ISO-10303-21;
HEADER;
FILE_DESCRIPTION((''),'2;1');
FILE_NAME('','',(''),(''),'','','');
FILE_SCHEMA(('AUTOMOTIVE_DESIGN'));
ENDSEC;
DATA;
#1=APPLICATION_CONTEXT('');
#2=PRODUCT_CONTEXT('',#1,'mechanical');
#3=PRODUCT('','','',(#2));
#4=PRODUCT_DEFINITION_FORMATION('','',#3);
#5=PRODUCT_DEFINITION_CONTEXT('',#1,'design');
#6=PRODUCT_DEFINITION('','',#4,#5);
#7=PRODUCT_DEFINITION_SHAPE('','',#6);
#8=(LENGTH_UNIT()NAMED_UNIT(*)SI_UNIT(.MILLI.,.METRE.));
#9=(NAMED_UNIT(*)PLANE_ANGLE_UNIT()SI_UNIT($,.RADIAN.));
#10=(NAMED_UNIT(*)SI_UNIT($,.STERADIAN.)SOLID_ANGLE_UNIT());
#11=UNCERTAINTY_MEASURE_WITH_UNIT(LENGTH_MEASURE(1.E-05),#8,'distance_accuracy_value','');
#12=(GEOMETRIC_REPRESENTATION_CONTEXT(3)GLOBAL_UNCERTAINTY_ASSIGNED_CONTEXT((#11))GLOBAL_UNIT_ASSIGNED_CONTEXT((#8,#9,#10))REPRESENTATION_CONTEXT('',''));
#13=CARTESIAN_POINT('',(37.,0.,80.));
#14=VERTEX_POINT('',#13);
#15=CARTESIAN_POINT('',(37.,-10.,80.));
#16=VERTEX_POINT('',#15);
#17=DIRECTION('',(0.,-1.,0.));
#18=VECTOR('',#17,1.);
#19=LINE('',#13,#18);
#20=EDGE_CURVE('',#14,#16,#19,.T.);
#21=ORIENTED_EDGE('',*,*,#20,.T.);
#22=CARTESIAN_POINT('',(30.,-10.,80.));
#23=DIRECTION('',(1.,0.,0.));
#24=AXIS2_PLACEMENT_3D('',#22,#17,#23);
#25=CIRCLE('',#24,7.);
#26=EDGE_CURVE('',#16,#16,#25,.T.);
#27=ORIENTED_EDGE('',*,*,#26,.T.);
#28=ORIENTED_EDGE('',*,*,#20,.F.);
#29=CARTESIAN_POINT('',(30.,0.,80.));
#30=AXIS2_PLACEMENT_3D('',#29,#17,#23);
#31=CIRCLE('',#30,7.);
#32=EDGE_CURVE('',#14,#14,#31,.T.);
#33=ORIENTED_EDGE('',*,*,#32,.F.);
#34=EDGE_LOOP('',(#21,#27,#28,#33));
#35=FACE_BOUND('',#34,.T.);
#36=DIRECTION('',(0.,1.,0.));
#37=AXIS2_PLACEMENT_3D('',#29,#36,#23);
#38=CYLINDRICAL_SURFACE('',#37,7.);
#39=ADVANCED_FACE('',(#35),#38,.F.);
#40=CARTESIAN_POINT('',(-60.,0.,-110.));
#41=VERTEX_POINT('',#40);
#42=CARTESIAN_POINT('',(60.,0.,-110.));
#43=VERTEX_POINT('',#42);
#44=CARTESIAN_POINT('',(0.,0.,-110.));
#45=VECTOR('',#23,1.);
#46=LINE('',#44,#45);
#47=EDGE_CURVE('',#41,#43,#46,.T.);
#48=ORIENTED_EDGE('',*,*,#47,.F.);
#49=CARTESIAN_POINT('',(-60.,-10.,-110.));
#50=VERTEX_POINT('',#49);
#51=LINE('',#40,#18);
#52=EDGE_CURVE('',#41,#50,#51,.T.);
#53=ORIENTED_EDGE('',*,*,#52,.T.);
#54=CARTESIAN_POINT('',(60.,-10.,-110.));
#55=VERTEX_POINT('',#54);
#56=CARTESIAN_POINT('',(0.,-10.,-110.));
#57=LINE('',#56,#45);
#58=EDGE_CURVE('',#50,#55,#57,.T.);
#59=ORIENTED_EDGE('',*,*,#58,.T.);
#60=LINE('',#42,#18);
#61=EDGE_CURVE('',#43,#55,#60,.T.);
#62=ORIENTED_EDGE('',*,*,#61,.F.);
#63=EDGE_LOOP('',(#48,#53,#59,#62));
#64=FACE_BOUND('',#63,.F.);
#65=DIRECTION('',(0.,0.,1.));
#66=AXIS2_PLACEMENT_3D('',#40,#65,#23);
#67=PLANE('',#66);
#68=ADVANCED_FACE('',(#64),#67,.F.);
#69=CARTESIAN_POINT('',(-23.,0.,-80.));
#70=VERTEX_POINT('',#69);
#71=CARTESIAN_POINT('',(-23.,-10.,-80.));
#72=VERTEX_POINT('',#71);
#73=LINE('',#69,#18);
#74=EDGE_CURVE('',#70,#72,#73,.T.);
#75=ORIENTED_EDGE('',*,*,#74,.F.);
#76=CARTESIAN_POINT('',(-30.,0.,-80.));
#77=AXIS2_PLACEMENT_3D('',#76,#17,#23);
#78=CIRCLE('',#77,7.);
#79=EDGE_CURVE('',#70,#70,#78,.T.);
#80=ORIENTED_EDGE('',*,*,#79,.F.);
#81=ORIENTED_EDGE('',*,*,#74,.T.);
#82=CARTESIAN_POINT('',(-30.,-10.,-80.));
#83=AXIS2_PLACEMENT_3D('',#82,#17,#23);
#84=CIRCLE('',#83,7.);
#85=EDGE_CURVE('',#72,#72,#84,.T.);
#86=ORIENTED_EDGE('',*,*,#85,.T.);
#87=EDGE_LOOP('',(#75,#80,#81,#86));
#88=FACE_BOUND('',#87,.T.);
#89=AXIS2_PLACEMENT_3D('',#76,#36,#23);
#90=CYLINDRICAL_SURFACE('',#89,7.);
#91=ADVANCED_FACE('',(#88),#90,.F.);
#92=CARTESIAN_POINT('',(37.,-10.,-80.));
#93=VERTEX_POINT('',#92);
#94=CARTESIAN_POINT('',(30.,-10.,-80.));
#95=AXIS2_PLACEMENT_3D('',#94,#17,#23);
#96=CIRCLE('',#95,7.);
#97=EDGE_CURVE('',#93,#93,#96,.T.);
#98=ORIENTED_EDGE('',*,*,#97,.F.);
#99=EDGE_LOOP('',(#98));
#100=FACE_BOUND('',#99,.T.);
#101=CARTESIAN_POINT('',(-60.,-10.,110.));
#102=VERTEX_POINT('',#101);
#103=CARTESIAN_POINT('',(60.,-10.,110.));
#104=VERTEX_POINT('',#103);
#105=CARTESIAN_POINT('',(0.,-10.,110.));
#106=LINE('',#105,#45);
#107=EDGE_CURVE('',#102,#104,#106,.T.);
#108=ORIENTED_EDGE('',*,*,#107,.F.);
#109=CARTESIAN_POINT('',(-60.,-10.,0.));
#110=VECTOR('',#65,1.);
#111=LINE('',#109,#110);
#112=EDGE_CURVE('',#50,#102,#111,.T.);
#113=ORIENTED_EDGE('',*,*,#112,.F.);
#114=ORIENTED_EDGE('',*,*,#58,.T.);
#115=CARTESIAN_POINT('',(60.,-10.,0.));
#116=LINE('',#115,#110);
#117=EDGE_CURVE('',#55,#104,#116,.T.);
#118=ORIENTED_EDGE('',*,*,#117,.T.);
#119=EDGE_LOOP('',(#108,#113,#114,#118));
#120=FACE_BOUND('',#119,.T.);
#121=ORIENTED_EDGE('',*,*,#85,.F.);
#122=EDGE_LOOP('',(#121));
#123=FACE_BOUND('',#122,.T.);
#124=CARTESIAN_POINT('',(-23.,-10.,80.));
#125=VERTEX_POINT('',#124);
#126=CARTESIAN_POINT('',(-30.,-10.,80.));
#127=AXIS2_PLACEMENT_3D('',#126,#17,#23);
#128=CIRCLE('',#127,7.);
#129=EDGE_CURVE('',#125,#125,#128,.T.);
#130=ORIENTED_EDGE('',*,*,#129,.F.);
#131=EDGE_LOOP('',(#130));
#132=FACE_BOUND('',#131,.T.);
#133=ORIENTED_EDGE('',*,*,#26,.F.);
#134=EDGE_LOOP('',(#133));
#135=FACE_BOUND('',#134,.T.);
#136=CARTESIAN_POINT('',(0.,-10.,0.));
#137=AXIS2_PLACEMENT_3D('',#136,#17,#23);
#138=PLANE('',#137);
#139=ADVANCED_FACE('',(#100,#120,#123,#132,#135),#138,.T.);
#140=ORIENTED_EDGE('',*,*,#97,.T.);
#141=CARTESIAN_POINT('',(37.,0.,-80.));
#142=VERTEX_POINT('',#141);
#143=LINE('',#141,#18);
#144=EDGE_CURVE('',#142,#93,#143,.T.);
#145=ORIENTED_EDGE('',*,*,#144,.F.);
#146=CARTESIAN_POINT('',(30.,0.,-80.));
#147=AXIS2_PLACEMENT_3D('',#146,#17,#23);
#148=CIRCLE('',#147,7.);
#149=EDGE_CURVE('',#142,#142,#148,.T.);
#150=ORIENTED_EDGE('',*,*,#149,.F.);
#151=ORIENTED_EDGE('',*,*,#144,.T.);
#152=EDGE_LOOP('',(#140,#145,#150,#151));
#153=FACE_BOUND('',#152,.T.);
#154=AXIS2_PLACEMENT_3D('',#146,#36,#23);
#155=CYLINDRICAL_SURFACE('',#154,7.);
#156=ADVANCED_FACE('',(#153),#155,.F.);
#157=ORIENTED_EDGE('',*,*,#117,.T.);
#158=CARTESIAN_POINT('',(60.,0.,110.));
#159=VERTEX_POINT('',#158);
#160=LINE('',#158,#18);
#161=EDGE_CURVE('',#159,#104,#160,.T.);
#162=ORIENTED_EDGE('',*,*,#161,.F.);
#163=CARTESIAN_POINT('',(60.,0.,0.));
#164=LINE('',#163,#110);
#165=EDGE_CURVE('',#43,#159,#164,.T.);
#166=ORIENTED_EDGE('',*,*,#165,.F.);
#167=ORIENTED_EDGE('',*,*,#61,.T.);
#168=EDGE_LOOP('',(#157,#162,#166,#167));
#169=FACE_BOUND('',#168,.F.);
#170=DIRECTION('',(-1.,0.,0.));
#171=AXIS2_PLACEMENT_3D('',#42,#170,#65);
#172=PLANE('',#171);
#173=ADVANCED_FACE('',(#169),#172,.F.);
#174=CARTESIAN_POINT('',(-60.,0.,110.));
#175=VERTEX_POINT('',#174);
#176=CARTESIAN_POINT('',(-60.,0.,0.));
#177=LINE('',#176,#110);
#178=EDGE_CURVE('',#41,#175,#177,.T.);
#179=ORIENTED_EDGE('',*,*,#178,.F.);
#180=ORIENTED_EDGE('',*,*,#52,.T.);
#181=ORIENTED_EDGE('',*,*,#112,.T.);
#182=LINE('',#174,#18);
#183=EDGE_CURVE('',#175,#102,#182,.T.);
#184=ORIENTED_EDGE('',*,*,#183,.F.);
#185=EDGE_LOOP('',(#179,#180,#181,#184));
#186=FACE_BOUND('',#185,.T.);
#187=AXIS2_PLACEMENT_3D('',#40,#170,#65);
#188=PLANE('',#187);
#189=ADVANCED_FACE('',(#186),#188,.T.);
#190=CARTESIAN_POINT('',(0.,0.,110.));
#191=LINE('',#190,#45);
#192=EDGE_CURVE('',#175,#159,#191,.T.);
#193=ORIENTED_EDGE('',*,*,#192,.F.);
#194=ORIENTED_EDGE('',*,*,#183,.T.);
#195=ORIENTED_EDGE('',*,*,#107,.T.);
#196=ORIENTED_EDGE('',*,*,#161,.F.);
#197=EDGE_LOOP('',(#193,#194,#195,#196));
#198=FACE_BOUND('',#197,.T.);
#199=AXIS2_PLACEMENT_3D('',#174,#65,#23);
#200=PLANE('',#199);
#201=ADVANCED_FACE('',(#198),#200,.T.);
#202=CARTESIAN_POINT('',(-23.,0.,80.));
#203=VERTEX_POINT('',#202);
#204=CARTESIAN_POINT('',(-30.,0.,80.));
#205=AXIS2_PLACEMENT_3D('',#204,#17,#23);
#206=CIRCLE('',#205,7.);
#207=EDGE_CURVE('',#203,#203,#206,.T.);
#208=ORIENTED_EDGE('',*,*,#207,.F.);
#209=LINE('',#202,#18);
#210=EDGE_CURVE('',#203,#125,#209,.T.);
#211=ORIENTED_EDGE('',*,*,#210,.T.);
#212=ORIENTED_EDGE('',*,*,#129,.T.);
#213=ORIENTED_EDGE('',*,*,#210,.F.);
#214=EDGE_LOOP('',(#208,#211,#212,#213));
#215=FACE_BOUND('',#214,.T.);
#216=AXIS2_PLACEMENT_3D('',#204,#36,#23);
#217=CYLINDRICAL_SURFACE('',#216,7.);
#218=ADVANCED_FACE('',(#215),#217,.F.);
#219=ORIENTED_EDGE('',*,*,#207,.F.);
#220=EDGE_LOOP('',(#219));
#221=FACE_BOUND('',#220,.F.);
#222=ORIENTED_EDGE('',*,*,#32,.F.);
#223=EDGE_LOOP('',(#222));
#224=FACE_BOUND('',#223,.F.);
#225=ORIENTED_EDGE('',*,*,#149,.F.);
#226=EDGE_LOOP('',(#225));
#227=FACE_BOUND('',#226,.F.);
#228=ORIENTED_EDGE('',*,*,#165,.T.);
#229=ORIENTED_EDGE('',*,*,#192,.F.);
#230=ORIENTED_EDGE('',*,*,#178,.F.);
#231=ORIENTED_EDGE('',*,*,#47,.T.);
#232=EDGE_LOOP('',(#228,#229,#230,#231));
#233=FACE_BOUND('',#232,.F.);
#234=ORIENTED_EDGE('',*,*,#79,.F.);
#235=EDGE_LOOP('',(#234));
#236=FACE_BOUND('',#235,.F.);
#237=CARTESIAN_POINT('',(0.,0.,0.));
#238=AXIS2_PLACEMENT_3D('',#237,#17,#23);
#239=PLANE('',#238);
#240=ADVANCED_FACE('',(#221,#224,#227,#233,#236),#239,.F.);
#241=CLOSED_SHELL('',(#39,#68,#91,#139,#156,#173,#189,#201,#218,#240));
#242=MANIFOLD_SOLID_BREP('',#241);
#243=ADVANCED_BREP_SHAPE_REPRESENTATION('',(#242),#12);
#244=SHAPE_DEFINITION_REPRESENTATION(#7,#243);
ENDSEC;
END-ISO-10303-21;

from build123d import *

# Parameters (mm, degrees)
F0_W     = 120
F0_H     = 220
F0_R     = 7
F1_DEPTH = 10


# Not quite as in the source:
# - a feature names something its author has since deleted; it is built from what else it names


with BuildPart() as f1:
    # F0 (on Front) → F1 (new body)
    with BuildSketch(Plane.XZ):
        Rectangle(F0_W, F0_H)
        with Locations((-30, -80)):
            Circle(F0_R, mode=Mode.SUBTRACT)
        with Locations((30, -80)):
            Circle(F0_R, mode=Mode.SUBTRACT)
        with Locations((-30, 80)):
            Circle(F0_R, mode=Mode.SUBTRACT)
        with Locations((30, 80)):
            Circle(F0_R, mode=Mode.SUBTRACT)
    extrude(amount=F1_DEPTH)


solid = f1.part
